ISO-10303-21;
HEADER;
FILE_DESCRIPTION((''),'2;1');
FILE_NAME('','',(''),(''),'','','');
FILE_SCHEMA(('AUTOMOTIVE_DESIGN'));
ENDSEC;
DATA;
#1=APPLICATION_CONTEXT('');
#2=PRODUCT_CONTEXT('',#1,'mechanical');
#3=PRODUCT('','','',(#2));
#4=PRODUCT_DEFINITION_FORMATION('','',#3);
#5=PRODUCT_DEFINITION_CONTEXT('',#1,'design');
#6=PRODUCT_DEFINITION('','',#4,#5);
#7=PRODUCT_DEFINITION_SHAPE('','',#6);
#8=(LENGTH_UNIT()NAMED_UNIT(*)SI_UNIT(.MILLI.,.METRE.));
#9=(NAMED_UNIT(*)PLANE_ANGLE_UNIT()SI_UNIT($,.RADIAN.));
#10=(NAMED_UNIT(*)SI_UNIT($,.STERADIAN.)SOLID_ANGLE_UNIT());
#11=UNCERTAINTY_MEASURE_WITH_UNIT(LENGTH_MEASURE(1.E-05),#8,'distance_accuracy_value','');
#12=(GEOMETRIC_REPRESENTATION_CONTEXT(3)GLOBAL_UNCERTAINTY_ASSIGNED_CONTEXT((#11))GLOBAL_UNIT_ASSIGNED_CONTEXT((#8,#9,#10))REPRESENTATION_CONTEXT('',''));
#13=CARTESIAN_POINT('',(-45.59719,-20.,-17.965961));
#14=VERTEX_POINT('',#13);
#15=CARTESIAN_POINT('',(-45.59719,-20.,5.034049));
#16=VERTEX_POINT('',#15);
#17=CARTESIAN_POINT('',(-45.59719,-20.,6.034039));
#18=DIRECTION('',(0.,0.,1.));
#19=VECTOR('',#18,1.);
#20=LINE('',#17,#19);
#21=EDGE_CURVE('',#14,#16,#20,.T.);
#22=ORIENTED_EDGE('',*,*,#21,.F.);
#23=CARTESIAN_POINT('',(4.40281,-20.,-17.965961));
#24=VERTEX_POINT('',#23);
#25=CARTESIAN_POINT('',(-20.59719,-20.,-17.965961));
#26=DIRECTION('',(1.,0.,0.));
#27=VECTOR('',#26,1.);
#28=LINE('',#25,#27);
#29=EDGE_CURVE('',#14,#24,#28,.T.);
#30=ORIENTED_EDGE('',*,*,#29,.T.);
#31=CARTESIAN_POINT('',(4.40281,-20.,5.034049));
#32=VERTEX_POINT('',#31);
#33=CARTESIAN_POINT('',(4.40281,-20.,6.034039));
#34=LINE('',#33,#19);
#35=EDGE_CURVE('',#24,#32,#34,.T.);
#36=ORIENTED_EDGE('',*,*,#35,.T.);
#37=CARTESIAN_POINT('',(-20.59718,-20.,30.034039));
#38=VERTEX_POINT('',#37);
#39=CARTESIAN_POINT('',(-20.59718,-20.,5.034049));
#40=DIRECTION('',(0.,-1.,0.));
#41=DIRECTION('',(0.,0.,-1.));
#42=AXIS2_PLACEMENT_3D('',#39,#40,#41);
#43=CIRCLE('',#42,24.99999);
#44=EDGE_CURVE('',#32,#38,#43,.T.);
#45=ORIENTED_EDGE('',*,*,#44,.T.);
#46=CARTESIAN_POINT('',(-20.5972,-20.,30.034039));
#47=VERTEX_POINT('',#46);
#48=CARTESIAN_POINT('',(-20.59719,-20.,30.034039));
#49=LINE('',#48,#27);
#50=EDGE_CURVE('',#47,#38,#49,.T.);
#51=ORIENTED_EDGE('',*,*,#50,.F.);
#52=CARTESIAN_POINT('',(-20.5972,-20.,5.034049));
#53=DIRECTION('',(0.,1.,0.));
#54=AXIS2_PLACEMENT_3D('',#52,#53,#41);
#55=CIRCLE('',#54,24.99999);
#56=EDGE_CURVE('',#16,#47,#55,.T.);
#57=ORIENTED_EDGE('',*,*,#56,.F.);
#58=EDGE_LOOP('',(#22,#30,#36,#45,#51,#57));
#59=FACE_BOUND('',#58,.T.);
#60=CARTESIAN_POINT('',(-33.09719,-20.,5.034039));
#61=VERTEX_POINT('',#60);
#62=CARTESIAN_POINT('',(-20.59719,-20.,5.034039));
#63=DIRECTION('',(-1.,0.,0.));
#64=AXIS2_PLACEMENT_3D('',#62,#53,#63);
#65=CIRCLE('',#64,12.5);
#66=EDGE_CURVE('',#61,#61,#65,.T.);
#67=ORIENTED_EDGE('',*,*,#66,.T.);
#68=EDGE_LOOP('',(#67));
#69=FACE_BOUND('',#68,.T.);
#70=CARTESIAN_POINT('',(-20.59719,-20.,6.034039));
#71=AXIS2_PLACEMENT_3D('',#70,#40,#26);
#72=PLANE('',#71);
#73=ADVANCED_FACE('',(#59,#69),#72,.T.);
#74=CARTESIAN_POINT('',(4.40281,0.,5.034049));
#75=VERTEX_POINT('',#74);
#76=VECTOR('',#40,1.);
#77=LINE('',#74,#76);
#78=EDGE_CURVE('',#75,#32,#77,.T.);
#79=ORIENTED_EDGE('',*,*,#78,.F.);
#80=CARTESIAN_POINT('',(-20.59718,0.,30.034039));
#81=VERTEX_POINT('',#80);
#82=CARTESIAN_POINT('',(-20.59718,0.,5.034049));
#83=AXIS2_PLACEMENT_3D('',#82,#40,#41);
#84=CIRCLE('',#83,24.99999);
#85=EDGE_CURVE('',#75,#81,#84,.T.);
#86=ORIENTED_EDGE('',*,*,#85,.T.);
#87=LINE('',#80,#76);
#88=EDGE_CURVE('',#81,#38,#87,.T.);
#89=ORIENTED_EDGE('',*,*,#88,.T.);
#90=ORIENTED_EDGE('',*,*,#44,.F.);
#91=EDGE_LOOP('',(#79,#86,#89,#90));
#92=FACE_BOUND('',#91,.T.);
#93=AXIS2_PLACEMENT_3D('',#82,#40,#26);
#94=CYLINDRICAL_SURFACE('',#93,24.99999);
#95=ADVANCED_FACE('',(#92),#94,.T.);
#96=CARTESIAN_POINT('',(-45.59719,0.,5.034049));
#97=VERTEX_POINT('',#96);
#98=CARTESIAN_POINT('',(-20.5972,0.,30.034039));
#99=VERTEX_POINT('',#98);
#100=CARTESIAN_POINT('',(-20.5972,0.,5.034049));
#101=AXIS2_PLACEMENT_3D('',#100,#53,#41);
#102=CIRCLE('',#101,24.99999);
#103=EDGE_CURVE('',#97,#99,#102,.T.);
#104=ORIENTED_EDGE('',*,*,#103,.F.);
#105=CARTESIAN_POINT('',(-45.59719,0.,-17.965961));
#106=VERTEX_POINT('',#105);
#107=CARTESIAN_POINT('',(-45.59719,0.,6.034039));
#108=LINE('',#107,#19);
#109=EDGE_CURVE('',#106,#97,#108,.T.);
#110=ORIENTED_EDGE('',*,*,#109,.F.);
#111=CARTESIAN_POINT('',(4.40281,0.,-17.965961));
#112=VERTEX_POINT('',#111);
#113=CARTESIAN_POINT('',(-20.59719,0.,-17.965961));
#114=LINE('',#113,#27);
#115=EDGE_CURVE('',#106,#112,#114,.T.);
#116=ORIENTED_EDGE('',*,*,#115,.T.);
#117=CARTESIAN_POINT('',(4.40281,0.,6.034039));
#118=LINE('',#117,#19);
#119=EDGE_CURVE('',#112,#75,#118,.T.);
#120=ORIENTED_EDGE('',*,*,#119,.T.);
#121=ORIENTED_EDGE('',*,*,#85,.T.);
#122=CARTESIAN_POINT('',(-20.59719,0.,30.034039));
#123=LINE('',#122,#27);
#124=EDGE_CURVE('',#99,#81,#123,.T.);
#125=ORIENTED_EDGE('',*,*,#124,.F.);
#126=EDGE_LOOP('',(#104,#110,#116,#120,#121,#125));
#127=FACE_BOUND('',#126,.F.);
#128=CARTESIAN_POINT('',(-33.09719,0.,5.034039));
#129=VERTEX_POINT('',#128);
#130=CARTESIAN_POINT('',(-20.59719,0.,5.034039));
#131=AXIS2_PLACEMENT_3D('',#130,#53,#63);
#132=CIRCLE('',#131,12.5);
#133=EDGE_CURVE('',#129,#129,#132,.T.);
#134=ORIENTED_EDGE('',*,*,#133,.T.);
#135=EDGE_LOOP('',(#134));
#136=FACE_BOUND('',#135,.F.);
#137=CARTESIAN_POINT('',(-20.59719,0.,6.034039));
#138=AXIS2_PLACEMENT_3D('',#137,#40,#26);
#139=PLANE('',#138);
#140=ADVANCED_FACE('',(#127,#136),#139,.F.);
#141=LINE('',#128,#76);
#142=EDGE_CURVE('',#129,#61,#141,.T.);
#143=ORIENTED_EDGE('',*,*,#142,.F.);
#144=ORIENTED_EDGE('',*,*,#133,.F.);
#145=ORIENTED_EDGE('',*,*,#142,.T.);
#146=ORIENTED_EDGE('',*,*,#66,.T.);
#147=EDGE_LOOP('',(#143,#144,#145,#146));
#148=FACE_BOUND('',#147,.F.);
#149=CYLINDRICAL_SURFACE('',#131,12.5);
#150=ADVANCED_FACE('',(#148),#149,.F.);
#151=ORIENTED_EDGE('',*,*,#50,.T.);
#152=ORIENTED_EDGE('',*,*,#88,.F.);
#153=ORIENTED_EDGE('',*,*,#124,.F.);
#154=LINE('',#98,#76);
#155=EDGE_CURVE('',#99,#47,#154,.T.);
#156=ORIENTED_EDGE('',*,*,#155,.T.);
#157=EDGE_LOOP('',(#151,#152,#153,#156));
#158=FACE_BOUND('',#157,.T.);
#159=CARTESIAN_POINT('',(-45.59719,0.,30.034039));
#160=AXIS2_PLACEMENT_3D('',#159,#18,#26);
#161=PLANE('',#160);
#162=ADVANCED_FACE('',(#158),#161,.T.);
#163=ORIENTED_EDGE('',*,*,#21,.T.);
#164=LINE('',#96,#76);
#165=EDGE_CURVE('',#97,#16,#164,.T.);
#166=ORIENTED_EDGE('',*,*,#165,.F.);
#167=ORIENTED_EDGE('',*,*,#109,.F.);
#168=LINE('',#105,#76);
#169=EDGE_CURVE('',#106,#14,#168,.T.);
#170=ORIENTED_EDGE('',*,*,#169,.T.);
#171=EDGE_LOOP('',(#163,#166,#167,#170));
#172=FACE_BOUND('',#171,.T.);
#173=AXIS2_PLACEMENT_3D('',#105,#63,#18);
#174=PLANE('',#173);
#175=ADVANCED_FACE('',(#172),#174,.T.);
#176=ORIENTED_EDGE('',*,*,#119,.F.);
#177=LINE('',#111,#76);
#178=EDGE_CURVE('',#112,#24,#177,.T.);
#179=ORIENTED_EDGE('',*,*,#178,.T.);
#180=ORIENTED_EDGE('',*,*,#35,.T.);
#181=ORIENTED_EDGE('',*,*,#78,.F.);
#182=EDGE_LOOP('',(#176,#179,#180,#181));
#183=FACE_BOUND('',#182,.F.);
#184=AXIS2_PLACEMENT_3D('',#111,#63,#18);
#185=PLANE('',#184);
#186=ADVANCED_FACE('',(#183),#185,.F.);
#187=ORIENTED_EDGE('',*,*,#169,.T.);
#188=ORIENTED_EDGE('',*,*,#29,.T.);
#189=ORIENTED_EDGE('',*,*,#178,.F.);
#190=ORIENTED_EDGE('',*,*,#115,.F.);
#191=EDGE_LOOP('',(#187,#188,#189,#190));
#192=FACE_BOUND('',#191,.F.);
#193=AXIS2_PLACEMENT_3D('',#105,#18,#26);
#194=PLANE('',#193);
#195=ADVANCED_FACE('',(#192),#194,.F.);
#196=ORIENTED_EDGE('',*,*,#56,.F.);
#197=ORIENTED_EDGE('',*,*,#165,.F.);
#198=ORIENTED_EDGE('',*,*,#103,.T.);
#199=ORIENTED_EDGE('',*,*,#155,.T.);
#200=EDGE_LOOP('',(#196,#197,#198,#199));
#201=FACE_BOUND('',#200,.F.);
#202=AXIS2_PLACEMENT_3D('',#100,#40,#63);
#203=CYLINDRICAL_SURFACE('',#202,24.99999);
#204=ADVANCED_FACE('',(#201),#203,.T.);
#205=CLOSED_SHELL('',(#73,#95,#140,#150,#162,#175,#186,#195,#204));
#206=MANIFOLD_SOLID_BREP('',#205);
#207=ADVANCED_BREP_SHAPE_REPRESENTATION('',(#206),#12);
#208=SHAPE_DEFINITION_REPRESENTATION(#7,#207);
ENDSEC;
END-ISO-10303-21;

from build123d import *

# Parameters (mm, degrees)
F0_W     = 50
F0_H     = 48
F1_DEPTH = 20
F2_R     = 24.99999
F3_R     = 12.5
F4_DEPTH = 25


# Not quite as in the source:
# - a fillet or chamfer is up to 0.001 mm smaller than in the source, because OpenCascade refuses the exact size


with BuildPart() as f1:
    # F0 (on Front) → F1 (new body)
    with BuildSketch(Plane.XZ):
        with Locations((-20.5971896648, 6.0340394775)):
            Rectangle(F0_W, F0_H)
    extrude(amount=F1_DEPTH)

    # F2 (radius 25 in the source; OpenCascade refuses exactly that, so slightly less here)
    f2_edges = [f1.edges().sort_by_distance(p)[0] for p in [
        (4.40281, -10, 30.034039),
        (-45.59719, -10, 30.034039),
    ]]
    fillet(f2_edges, radius=F2_R)

    # F3 (on face) → F4 (cut)
    with BuildSketch(Plane(origin=(0, 0, 0), x_dir=(-1, 0, 0), z_dir=(0, 1, 0))):
        with Locations((20.5971896648, 5.0340394775)):
            Circle(F3_R)
    extrude(amount=-F4_DEPTH, mode=Mode.SUBTRACT)


solid = f1.part
